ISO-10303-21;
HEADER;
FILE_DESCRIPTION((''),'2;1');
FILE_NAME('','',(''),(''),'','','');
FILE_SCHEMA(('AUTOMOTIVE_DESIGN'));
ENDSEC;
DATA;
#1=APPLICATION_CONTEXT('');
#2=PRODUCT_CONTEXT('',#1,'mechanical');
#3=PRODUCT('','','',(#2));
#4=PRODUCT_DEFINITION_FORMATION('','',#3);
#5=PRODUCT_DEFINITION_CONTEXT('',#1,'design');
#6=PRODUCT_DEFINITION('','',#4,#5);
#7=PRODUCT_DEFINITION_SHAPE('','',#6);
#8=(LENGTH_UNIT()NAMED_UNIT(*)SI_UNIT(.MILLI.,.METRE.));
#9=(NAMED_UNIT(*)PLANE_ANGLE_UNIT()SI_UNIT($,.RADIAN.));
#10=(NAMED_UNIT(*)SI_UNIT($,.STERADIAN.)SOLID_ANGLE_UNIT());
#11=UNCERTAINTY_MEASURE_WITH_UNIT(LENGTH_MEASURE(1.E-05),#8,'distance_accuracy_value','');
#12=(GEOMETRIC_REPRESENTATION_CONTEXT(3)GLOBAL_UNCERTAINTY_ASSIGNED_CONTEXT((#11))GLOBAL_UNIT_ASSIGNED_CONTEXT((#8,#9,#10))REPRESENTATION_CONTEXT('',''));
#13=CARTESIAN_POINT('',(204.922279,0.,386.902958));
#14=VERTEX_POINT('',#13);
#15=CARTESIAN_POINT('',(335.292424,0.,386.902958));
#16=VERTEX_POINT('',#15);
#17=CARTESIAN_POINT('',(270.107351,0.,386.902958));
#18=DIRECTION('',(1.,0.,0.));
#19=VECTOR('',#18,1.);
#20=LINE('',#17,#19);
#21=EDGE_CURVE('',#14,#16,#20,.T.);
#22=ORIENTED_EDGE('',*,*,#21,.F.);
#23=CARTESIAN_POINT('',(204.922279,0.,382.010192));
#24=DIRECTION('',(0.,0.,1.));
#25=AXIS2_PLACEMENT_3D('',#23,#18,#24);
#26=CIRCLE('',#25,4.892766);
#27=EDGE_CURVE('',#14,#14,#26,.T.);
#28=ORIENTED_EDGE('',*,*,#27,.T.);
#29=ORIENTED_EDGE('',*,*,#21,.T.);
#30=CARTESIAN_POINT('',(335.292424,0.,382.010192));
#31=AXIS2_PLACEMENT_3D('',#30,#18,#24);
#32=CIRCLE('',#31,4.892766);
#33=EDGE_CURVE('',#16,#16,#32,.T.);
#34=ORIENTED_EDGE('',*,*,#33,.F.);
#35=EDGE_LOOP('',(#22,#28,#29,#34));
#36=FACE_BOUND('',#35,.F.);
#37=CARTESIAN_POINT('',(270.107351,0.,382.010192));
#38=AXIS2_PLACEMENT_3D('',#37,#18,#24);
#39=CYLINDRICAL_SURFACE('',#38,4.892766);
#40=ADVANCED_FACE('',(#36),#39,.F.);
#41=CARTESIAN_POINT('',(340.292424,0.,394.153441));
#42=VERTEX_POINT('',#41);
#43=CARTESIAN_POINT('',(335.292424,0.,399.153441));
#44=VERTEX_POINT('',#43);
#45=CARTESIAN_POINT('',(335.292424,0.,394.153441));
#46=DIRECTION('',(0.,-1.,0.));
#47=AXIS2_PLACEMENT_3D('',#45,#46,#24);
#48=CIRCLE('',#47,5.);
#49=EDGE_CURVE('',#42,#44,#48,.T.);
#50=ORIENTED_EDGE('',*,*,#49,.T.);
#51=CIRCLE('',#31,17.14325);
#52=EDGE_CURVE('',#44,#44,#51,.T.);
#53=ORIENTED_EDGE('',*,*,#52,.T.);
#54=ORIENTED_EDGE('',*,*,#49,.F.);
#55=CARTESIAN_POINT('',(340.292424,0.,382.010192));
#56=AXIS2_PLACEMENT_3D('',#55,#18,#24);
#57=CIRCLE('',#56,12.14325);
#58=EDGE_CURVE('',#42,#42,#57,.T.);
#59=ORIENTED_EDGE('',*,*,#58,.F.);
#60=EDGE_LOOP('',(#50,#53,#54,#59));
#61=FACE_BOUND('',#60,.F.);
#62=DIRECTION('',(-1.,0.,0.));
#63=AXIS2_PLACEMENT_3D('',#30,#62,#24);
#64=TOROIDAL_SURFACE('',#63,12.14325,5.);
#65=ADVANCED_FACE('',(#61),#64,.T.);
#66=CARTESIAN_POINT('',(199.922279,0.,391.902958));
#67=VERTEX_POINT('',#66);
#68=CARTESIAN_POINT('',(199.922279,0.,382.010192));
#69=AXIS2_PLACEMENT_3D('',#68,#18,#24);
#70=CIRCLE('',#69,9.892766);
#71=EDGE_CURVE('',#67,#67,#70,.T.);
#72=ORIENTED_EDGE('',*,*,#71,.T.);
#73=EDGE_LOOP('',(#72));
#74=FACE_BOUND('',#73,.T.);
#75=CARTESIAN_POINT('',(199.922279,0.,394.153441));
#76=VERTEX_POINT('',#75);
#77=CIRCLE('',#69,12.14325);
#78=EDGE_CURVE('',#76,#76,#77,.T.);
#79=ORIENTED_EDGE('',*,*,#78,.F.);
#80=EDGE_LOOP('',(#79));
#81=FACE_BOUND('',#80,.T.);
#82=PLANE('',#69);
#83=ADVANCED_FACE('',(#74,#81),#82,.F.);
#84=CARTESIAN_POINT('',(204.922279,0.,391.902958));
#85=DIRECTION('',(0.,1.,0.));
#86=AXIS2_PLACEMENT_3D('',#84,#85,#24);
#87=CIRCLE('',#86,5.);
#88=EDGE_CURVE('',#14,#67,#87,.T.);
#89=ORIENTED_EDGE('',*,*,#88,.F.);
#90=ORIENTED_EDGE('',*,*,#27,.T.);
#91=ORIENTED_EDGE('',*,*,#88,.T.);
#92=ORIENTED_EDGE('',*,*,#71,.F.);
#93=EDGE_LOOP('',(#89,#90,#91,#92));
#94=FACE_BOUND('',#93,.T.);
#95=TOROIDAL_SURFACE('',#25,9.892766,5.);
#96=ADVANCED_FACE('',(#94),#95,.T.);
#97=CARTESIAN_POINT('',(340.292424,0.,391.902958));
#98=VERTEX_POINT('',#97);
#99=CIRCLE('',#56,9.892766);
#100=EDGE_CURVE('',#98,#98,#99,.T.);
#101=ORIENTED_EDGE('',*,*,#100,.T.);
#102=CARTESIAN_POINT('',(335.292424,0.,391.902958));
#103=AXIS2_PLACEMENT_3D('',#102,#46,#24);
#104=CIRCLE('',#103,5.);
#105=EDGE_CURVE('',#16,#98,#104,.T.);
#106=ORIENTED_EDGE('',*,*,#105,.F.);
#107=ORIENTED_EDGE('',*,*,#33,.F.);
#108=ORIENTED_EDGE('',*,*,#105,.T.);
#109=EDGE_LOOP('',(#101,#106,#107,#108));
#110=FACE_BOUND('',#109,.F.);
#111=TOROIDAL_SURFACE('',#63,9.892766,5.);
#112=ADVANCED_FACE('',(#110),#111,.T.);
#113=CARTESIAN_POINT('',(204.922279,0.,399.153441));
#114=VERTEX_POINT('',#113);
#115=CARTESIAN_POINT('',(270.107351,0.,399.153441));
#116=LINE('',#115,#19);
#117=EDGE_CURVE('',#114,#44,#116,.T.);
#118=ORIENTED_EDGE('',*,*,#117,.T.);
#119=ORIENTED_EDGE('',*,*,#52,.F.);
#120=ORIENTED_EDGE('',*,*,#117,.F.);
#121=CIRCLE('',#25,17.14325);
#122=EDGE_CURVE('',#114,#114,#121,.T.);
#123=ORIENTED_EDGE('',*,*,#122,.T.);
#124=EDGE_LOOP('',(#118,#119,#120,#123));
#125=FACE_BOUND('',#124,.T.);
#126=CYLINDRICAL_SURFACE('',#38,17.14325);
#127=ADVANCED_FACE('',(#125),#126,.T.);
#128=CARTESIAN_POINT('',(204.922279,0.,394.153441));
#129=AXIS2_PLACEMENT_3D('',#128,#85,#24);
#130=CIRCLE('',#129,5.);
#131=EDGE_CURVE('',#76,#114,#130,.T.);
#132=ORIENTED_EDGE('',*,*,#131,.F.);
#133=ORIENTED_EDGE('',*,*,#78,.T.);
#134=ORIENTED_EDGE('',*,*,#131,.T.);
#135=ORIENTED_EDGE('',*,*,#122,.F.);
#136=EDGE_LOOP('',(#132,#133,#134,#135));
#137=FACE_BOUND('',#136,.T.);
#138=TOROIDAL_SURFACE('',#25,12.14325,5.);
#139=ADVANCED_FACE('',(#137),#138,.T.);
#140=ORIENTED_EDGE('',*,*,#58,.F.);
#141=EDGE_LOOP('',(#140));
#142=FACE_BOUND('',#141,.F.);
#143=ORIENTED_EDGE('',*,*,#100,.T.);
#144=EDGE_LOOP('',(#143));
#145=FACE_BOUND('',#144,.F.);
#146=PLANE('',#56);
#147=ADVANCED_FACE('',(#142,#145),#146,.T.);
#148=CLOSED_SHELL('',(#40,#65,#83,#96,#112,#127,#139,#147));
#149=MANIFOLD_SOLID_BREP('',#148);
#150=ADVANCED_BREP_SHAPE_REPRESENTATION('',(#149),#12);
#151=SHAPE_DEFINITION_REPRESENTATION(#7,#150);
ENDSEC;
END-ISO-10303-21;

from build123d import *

# Parameters (mm, degrees)
F1_W = 140.3701454401
F1_H = 12.250483036
F5_R = 5
F6_R = 5


# Not quite as in the source:
# - a feature of the source that left no trace in its solid (it failed there, or was rolled back) is left out


with BuildPart() as f4:
    # F1 (on Front) → F4 (revolve)
    with BuildSketch(Plane.XZ):
        with Locations((270.1073512435, 393.0281996727)):
            Rectangle(F1_W, F1_H)
    revolve(axis=Axis((279.5873135328, 0, 382.010191679), (1, 0, 0)))

    # F5
    f5_edges = [f4.edges().sort_by_distance(p)[0] for p in [
        (340.292424, 0, 377.117425),
        (340.292424, 0, 364.866942),
    ]]
    fillet(f5_edges, radius=F5_R)

    # F6
    f6_edges = [f4.edges().sort_by_distance(p)[0] for p in [
        (199.922279, 0, 364.866942),
        (199.922279, 0, 377.117425),
    ]]
    fillet(f6_edges, radius=F6_R)


solid = f4.part
